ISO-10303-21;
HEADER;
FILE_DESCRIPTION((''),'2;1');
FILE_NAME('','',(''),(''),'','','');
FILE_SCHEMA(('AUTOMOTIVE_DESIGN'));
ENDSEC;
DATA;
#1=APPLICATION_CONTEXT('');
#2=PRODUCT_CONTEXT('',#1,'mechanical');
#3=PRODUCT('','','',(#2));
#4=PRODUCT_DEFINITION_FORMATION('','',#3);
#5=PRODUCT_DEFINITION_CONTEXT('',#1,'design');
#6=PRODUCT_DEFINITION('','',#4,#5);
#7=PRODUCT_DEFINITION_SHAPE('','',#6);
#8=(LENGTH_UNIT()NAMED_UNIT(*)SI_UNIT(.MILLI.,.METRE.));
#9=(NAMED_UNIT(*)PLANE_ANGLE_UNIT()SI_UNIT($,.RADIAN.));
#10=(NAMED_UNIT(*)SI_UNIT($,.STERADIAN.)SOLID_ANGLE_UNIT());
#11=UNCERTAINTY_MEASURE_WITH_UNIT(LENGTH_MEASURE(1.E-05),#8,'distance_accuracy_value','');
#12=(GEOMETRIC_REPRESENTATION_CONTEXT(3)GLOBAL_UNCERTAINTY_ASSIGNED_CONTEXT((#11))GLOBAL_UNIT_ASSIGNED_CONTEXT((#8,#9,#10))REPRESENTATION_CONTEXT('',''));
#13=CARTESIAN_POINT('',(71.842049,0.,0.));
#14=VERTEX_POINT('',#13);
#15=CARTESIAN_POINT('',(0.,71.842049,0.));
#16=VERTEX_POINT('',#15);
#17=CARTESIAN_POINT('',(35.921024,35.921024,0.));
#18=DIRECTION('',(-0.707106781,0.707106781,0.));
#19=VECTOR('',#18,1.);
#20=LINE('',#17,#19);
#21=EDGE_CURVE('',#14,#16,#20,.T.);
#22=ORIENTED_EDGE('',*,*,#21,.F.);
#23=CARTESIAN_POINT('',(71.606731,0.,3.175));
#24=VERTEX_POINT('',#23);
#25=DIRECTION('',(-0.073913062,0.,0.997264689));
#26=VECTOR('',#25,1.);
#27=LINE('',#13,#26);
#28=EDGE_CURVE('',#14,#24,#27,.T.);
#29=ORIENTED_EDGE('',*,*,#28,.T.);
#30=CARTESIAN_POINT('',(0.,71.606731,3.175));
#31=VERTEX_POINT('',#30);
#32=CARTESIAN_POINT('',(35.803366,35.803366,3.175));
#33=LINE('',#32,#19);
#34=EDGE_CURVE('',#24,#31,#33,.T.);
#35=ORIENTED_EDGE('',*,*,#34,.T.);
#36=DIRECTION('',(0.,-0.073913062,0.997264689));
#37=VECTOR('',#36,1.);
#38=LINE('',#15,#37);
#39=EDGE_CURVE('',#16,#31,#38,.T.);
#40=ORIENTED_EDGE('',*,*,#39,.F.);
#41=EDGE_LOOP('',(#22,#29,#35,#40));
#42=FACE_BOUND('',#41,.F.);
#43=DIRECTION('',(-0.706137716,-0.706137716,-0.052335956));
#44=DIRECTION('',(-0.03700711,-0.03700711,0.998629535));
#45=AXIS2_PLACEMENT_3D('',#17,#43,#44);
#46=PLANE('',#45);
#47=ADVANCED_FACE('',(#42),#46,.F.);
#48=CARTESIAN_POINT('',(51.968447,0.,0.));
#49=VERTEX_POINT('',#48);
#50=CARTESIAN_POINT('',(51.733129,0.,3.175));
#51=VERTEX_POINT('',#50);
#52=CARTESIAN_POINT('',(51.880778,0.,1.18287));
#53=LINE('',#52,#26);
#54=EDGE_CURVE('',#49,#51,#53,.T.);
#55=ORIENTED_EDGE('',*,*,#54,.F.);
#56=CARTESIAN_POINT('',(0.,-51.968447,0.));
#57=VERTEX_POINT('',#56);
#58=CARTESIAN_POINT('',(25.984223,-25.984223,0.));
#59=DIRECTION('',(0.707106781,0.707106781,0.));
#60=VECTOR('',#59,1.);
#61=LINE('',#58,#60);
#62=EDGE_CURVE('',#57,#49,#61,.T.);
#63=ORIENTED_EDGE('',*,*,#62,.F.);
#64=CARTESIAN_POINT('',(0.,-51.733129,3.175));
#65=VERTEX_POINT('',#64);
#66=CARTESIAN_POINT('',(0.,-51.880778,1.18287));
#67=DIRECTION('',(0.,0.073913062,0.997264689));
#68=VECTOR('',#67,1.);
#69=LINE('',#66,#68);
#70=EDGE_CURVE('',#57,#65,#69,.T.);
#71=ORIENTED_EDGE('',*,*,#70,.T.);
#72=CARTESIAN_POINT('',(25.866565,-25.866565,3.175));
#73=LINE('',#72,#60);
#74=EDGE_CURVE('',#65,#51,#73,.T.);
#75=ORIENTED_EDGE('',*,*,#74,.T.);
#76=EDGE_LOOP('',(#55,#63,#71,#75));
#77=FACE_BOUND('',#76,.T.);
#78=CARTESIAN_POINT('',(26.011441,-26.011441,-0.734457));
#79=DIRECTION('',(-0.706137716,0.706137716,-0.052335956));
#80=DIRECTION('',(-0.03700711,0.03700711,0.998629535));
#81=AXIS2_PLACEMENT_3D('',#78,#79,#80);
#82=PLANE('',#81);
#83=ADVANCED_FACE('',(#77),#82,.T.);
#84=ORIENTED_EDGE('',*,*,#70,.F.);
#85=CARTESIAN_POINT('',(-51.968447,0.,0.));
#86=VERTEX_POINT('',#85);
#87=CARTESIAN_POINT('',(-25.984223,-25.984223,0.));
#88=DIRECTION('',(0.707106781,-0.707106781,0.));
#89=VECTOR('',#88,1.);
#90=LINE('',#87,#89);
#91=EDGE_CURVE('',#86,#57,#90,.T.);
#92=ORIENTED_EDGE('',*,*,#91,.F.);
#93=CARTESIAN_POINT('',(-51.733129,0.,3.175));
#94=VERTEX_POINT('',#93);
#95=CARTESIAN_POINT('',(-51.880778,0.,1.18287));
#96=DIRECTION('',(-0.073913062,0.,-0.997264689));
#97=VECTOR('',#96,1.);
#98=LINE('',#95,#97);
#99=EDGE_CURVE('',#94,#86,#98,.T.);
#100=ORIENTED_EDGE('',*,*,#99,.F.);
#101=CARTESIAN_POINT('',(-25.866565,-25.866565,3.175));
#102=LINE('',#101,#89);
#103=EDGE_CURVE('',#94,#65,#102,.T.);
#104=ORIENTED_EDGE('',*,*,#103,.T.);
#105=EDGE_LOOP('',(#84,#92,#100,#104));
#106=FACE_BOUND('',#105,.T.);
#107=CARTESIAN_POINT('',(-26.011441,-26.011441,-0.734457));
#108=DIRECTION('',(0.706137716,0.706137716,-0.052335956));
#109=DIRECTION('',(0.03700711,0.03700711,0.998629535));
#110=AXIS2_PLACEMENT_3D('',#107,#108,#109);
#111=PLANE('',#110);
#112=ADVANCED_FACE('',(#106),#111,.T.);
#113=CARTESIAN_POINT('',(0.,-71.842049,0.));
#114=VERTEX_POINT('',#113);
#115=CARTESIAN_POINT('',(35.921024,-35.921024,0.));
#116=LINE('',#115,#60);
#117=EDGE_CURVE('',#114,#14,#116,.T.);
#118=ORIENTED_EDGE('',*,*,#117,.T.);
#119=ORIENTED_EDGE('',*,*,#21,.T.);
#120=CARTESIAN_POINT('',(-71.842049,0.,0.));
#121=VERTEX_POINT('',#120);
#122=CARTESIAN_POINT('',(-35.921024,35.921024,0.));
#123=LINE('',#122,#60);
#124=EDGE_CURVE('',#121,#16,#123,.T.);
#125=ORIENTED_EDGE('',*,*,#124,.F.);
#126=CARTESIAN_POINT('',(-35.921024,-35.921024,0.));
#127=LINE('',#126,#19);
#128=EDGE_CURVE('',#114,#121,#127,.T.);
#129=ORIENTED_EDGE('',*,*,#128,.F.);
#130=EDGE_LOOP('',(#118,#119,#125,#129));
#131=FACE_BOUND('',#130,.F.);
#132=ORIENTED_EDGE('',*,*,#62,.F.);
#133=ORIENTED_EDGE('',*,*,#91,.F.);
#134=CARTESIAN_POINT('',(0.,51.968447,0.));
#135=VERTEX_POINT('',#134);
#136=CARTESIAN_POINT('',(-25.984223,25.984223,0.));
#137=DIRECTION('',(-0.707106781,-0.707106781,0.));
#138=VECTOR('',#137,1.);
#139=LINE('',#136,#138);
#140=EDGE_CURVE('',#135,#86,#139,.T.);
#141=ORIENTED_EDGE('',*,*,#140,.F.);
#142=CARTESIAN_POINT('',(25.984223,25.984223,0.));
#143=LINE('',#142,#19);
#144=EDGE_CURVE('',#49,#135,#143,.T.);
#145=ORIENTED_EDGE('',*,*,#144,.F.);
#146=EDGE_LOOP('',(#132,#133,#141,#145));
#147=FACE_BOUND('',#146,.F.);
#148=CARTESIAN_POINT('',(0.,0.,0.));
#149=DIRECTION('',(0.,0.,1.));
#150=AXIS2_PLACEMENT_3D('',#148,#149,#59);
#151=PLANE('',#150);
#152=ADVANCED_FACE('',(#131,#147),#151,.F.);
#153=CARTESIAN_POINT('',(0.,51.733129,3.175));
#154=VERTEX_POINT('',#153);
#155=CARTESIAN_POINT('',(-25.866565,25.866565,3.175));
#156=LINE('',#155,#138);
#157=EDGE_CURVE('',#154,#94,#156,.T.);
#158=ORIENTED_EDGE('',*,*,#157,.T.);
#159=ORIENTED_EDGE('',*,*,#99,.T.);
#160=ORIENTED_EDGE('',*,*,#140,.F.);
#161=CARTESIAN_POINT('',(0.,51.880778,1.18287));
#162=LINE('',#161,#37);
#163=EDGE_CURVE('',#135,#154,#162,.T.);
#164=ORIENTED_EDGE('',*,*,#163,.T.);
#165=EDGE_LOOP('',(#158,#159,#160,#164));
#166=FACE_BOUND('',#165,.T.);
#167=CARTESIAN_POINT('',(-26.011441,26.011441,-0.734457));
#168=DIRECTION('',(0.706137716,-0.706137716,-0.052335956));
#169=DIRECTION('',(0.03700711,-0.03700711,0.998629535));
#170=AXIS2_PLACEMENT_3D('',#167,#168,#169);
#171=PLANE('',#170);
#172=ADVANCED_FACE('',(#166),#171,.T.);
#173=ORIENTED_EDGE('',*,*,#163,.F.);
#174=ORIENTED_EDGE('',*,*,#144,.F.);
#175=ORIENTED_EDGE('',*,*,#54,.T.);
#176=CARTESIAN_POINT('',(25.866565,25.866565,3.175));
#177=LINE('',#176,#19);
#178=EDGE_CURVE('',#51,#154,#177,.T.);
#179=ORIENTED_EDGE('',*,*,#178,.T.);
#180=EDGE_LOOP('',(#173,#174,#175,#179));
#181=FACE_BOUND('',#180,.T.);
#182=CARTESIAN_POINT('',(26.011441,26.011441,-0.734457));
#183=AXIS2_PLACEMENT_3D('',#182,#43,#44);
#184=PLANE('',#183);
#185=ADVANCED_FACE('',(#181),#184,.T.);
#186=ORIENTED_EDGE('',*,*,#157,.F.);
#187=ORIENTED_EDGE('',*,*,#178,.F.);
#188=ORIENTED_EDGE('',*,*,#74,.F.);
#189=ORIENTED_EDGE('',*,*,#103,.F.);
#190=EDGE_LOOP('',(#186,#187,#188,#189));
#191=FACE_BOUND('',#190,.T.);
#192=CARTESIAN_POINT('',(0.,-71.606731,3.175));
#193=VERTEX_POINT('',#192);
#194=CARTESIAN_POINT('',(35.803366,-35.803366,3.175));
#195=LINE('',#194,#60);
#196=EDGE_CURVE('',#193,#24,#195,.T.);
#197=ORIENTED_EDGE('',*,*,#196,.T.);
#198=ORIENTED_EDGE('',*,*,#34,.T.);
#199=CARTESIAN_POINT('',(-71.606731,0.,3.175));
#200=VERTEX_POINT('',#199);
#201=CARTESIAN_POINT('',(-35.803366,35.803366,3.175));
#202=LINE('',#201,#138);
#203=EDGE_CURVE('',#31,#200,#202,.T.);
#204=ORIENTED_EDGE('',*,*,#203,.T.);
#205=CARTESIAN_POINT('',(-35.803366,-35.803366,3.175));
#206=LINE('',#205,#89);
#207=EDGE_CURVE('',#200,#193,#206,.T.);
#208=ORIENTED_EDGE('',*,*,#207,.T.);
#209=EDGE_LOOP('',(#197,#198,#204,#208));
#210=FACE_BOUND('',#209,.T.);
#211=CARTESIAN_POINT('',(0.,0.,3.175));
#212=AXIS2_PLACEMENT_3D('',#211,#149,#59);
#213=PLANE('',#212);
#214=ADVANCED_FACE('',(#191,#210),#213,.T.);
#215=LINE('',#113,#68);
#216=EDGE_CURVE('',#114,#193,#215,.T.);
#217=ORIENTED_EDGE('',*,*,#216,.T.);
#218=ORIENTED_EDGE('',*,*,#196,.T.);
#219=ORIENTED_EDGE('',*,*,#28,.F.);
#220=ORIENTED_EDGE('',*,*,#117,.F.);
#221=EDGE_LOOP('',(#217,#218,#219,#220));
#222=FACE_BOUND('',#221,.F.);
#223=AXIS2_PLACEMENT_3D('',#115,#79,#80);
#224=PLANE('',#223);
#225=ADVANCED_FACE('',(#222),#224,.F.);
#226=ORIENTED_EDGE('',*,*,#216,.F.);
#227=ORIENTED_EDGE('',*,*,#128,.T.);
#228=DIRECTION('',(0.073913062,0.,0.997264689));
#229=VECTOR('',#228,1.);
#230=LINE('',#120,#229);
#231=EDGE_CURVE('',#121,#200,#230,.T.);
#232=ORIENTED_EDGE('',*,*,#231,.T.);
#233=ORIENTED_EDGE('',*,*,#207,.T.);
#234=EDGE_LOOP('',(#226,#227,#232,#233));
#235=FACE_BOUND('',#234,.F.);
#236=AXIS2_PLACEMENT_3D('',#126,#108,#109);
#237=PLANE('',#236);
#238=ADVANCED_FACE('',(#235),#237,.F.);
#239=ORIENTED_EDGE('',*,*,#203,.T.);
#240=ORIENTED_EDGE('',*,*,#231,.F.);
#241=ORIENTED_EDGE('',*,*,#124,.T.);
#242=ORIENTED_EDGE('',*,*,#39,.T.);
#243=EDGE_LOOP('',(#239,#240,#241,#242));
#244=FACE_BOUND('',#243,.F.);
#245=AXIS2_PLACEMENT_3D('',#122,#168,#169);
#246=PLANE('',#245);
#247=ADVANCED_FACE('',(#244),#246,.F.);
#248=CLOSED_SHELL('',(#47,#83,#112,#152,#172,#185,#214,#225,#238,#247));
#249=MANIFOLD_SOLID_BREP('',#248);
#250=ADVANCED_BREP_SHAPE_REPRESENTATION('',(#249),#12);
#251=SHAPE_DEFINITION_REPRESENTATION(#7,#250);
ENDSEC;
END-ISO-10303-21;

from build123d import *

# Parameters (mm, degrees)
F0_W     = 101.6
F0_H     = 101.6
F1_DEPTH = 3.175
F1_TAPER = 3
F2_T     = -14.0335
F4_ANGLE = 45


# Not quite as in the source:
# - a feature of the source that left no trace in its solid (it failed there, or was rolled back) is left out


with BuildPart() as f1:
    # F0 (on Top) → F1 (new body)
    with BuildSketch(Plane.XY):
        Rectangle(F0_W, F0_H)
    extrude(amount=F1_DEPTH, taper=F1_TAPER)

    # F2
    f2_openings = [f1.faces().sort_by_distance(p)[0] for p in [
        (0, 0, 3.175),
        (0, 0, 0),
    ]]
    offset(amount=F2_T, openings=f2_openings)


with BuildPart() as f1_1:
    # F4: moved
    add(f1.part.rotate(Axis((0, 0, 69.4056898355), (0, 0, 1)), F4_ANGLE))


solid = f1_1.part
